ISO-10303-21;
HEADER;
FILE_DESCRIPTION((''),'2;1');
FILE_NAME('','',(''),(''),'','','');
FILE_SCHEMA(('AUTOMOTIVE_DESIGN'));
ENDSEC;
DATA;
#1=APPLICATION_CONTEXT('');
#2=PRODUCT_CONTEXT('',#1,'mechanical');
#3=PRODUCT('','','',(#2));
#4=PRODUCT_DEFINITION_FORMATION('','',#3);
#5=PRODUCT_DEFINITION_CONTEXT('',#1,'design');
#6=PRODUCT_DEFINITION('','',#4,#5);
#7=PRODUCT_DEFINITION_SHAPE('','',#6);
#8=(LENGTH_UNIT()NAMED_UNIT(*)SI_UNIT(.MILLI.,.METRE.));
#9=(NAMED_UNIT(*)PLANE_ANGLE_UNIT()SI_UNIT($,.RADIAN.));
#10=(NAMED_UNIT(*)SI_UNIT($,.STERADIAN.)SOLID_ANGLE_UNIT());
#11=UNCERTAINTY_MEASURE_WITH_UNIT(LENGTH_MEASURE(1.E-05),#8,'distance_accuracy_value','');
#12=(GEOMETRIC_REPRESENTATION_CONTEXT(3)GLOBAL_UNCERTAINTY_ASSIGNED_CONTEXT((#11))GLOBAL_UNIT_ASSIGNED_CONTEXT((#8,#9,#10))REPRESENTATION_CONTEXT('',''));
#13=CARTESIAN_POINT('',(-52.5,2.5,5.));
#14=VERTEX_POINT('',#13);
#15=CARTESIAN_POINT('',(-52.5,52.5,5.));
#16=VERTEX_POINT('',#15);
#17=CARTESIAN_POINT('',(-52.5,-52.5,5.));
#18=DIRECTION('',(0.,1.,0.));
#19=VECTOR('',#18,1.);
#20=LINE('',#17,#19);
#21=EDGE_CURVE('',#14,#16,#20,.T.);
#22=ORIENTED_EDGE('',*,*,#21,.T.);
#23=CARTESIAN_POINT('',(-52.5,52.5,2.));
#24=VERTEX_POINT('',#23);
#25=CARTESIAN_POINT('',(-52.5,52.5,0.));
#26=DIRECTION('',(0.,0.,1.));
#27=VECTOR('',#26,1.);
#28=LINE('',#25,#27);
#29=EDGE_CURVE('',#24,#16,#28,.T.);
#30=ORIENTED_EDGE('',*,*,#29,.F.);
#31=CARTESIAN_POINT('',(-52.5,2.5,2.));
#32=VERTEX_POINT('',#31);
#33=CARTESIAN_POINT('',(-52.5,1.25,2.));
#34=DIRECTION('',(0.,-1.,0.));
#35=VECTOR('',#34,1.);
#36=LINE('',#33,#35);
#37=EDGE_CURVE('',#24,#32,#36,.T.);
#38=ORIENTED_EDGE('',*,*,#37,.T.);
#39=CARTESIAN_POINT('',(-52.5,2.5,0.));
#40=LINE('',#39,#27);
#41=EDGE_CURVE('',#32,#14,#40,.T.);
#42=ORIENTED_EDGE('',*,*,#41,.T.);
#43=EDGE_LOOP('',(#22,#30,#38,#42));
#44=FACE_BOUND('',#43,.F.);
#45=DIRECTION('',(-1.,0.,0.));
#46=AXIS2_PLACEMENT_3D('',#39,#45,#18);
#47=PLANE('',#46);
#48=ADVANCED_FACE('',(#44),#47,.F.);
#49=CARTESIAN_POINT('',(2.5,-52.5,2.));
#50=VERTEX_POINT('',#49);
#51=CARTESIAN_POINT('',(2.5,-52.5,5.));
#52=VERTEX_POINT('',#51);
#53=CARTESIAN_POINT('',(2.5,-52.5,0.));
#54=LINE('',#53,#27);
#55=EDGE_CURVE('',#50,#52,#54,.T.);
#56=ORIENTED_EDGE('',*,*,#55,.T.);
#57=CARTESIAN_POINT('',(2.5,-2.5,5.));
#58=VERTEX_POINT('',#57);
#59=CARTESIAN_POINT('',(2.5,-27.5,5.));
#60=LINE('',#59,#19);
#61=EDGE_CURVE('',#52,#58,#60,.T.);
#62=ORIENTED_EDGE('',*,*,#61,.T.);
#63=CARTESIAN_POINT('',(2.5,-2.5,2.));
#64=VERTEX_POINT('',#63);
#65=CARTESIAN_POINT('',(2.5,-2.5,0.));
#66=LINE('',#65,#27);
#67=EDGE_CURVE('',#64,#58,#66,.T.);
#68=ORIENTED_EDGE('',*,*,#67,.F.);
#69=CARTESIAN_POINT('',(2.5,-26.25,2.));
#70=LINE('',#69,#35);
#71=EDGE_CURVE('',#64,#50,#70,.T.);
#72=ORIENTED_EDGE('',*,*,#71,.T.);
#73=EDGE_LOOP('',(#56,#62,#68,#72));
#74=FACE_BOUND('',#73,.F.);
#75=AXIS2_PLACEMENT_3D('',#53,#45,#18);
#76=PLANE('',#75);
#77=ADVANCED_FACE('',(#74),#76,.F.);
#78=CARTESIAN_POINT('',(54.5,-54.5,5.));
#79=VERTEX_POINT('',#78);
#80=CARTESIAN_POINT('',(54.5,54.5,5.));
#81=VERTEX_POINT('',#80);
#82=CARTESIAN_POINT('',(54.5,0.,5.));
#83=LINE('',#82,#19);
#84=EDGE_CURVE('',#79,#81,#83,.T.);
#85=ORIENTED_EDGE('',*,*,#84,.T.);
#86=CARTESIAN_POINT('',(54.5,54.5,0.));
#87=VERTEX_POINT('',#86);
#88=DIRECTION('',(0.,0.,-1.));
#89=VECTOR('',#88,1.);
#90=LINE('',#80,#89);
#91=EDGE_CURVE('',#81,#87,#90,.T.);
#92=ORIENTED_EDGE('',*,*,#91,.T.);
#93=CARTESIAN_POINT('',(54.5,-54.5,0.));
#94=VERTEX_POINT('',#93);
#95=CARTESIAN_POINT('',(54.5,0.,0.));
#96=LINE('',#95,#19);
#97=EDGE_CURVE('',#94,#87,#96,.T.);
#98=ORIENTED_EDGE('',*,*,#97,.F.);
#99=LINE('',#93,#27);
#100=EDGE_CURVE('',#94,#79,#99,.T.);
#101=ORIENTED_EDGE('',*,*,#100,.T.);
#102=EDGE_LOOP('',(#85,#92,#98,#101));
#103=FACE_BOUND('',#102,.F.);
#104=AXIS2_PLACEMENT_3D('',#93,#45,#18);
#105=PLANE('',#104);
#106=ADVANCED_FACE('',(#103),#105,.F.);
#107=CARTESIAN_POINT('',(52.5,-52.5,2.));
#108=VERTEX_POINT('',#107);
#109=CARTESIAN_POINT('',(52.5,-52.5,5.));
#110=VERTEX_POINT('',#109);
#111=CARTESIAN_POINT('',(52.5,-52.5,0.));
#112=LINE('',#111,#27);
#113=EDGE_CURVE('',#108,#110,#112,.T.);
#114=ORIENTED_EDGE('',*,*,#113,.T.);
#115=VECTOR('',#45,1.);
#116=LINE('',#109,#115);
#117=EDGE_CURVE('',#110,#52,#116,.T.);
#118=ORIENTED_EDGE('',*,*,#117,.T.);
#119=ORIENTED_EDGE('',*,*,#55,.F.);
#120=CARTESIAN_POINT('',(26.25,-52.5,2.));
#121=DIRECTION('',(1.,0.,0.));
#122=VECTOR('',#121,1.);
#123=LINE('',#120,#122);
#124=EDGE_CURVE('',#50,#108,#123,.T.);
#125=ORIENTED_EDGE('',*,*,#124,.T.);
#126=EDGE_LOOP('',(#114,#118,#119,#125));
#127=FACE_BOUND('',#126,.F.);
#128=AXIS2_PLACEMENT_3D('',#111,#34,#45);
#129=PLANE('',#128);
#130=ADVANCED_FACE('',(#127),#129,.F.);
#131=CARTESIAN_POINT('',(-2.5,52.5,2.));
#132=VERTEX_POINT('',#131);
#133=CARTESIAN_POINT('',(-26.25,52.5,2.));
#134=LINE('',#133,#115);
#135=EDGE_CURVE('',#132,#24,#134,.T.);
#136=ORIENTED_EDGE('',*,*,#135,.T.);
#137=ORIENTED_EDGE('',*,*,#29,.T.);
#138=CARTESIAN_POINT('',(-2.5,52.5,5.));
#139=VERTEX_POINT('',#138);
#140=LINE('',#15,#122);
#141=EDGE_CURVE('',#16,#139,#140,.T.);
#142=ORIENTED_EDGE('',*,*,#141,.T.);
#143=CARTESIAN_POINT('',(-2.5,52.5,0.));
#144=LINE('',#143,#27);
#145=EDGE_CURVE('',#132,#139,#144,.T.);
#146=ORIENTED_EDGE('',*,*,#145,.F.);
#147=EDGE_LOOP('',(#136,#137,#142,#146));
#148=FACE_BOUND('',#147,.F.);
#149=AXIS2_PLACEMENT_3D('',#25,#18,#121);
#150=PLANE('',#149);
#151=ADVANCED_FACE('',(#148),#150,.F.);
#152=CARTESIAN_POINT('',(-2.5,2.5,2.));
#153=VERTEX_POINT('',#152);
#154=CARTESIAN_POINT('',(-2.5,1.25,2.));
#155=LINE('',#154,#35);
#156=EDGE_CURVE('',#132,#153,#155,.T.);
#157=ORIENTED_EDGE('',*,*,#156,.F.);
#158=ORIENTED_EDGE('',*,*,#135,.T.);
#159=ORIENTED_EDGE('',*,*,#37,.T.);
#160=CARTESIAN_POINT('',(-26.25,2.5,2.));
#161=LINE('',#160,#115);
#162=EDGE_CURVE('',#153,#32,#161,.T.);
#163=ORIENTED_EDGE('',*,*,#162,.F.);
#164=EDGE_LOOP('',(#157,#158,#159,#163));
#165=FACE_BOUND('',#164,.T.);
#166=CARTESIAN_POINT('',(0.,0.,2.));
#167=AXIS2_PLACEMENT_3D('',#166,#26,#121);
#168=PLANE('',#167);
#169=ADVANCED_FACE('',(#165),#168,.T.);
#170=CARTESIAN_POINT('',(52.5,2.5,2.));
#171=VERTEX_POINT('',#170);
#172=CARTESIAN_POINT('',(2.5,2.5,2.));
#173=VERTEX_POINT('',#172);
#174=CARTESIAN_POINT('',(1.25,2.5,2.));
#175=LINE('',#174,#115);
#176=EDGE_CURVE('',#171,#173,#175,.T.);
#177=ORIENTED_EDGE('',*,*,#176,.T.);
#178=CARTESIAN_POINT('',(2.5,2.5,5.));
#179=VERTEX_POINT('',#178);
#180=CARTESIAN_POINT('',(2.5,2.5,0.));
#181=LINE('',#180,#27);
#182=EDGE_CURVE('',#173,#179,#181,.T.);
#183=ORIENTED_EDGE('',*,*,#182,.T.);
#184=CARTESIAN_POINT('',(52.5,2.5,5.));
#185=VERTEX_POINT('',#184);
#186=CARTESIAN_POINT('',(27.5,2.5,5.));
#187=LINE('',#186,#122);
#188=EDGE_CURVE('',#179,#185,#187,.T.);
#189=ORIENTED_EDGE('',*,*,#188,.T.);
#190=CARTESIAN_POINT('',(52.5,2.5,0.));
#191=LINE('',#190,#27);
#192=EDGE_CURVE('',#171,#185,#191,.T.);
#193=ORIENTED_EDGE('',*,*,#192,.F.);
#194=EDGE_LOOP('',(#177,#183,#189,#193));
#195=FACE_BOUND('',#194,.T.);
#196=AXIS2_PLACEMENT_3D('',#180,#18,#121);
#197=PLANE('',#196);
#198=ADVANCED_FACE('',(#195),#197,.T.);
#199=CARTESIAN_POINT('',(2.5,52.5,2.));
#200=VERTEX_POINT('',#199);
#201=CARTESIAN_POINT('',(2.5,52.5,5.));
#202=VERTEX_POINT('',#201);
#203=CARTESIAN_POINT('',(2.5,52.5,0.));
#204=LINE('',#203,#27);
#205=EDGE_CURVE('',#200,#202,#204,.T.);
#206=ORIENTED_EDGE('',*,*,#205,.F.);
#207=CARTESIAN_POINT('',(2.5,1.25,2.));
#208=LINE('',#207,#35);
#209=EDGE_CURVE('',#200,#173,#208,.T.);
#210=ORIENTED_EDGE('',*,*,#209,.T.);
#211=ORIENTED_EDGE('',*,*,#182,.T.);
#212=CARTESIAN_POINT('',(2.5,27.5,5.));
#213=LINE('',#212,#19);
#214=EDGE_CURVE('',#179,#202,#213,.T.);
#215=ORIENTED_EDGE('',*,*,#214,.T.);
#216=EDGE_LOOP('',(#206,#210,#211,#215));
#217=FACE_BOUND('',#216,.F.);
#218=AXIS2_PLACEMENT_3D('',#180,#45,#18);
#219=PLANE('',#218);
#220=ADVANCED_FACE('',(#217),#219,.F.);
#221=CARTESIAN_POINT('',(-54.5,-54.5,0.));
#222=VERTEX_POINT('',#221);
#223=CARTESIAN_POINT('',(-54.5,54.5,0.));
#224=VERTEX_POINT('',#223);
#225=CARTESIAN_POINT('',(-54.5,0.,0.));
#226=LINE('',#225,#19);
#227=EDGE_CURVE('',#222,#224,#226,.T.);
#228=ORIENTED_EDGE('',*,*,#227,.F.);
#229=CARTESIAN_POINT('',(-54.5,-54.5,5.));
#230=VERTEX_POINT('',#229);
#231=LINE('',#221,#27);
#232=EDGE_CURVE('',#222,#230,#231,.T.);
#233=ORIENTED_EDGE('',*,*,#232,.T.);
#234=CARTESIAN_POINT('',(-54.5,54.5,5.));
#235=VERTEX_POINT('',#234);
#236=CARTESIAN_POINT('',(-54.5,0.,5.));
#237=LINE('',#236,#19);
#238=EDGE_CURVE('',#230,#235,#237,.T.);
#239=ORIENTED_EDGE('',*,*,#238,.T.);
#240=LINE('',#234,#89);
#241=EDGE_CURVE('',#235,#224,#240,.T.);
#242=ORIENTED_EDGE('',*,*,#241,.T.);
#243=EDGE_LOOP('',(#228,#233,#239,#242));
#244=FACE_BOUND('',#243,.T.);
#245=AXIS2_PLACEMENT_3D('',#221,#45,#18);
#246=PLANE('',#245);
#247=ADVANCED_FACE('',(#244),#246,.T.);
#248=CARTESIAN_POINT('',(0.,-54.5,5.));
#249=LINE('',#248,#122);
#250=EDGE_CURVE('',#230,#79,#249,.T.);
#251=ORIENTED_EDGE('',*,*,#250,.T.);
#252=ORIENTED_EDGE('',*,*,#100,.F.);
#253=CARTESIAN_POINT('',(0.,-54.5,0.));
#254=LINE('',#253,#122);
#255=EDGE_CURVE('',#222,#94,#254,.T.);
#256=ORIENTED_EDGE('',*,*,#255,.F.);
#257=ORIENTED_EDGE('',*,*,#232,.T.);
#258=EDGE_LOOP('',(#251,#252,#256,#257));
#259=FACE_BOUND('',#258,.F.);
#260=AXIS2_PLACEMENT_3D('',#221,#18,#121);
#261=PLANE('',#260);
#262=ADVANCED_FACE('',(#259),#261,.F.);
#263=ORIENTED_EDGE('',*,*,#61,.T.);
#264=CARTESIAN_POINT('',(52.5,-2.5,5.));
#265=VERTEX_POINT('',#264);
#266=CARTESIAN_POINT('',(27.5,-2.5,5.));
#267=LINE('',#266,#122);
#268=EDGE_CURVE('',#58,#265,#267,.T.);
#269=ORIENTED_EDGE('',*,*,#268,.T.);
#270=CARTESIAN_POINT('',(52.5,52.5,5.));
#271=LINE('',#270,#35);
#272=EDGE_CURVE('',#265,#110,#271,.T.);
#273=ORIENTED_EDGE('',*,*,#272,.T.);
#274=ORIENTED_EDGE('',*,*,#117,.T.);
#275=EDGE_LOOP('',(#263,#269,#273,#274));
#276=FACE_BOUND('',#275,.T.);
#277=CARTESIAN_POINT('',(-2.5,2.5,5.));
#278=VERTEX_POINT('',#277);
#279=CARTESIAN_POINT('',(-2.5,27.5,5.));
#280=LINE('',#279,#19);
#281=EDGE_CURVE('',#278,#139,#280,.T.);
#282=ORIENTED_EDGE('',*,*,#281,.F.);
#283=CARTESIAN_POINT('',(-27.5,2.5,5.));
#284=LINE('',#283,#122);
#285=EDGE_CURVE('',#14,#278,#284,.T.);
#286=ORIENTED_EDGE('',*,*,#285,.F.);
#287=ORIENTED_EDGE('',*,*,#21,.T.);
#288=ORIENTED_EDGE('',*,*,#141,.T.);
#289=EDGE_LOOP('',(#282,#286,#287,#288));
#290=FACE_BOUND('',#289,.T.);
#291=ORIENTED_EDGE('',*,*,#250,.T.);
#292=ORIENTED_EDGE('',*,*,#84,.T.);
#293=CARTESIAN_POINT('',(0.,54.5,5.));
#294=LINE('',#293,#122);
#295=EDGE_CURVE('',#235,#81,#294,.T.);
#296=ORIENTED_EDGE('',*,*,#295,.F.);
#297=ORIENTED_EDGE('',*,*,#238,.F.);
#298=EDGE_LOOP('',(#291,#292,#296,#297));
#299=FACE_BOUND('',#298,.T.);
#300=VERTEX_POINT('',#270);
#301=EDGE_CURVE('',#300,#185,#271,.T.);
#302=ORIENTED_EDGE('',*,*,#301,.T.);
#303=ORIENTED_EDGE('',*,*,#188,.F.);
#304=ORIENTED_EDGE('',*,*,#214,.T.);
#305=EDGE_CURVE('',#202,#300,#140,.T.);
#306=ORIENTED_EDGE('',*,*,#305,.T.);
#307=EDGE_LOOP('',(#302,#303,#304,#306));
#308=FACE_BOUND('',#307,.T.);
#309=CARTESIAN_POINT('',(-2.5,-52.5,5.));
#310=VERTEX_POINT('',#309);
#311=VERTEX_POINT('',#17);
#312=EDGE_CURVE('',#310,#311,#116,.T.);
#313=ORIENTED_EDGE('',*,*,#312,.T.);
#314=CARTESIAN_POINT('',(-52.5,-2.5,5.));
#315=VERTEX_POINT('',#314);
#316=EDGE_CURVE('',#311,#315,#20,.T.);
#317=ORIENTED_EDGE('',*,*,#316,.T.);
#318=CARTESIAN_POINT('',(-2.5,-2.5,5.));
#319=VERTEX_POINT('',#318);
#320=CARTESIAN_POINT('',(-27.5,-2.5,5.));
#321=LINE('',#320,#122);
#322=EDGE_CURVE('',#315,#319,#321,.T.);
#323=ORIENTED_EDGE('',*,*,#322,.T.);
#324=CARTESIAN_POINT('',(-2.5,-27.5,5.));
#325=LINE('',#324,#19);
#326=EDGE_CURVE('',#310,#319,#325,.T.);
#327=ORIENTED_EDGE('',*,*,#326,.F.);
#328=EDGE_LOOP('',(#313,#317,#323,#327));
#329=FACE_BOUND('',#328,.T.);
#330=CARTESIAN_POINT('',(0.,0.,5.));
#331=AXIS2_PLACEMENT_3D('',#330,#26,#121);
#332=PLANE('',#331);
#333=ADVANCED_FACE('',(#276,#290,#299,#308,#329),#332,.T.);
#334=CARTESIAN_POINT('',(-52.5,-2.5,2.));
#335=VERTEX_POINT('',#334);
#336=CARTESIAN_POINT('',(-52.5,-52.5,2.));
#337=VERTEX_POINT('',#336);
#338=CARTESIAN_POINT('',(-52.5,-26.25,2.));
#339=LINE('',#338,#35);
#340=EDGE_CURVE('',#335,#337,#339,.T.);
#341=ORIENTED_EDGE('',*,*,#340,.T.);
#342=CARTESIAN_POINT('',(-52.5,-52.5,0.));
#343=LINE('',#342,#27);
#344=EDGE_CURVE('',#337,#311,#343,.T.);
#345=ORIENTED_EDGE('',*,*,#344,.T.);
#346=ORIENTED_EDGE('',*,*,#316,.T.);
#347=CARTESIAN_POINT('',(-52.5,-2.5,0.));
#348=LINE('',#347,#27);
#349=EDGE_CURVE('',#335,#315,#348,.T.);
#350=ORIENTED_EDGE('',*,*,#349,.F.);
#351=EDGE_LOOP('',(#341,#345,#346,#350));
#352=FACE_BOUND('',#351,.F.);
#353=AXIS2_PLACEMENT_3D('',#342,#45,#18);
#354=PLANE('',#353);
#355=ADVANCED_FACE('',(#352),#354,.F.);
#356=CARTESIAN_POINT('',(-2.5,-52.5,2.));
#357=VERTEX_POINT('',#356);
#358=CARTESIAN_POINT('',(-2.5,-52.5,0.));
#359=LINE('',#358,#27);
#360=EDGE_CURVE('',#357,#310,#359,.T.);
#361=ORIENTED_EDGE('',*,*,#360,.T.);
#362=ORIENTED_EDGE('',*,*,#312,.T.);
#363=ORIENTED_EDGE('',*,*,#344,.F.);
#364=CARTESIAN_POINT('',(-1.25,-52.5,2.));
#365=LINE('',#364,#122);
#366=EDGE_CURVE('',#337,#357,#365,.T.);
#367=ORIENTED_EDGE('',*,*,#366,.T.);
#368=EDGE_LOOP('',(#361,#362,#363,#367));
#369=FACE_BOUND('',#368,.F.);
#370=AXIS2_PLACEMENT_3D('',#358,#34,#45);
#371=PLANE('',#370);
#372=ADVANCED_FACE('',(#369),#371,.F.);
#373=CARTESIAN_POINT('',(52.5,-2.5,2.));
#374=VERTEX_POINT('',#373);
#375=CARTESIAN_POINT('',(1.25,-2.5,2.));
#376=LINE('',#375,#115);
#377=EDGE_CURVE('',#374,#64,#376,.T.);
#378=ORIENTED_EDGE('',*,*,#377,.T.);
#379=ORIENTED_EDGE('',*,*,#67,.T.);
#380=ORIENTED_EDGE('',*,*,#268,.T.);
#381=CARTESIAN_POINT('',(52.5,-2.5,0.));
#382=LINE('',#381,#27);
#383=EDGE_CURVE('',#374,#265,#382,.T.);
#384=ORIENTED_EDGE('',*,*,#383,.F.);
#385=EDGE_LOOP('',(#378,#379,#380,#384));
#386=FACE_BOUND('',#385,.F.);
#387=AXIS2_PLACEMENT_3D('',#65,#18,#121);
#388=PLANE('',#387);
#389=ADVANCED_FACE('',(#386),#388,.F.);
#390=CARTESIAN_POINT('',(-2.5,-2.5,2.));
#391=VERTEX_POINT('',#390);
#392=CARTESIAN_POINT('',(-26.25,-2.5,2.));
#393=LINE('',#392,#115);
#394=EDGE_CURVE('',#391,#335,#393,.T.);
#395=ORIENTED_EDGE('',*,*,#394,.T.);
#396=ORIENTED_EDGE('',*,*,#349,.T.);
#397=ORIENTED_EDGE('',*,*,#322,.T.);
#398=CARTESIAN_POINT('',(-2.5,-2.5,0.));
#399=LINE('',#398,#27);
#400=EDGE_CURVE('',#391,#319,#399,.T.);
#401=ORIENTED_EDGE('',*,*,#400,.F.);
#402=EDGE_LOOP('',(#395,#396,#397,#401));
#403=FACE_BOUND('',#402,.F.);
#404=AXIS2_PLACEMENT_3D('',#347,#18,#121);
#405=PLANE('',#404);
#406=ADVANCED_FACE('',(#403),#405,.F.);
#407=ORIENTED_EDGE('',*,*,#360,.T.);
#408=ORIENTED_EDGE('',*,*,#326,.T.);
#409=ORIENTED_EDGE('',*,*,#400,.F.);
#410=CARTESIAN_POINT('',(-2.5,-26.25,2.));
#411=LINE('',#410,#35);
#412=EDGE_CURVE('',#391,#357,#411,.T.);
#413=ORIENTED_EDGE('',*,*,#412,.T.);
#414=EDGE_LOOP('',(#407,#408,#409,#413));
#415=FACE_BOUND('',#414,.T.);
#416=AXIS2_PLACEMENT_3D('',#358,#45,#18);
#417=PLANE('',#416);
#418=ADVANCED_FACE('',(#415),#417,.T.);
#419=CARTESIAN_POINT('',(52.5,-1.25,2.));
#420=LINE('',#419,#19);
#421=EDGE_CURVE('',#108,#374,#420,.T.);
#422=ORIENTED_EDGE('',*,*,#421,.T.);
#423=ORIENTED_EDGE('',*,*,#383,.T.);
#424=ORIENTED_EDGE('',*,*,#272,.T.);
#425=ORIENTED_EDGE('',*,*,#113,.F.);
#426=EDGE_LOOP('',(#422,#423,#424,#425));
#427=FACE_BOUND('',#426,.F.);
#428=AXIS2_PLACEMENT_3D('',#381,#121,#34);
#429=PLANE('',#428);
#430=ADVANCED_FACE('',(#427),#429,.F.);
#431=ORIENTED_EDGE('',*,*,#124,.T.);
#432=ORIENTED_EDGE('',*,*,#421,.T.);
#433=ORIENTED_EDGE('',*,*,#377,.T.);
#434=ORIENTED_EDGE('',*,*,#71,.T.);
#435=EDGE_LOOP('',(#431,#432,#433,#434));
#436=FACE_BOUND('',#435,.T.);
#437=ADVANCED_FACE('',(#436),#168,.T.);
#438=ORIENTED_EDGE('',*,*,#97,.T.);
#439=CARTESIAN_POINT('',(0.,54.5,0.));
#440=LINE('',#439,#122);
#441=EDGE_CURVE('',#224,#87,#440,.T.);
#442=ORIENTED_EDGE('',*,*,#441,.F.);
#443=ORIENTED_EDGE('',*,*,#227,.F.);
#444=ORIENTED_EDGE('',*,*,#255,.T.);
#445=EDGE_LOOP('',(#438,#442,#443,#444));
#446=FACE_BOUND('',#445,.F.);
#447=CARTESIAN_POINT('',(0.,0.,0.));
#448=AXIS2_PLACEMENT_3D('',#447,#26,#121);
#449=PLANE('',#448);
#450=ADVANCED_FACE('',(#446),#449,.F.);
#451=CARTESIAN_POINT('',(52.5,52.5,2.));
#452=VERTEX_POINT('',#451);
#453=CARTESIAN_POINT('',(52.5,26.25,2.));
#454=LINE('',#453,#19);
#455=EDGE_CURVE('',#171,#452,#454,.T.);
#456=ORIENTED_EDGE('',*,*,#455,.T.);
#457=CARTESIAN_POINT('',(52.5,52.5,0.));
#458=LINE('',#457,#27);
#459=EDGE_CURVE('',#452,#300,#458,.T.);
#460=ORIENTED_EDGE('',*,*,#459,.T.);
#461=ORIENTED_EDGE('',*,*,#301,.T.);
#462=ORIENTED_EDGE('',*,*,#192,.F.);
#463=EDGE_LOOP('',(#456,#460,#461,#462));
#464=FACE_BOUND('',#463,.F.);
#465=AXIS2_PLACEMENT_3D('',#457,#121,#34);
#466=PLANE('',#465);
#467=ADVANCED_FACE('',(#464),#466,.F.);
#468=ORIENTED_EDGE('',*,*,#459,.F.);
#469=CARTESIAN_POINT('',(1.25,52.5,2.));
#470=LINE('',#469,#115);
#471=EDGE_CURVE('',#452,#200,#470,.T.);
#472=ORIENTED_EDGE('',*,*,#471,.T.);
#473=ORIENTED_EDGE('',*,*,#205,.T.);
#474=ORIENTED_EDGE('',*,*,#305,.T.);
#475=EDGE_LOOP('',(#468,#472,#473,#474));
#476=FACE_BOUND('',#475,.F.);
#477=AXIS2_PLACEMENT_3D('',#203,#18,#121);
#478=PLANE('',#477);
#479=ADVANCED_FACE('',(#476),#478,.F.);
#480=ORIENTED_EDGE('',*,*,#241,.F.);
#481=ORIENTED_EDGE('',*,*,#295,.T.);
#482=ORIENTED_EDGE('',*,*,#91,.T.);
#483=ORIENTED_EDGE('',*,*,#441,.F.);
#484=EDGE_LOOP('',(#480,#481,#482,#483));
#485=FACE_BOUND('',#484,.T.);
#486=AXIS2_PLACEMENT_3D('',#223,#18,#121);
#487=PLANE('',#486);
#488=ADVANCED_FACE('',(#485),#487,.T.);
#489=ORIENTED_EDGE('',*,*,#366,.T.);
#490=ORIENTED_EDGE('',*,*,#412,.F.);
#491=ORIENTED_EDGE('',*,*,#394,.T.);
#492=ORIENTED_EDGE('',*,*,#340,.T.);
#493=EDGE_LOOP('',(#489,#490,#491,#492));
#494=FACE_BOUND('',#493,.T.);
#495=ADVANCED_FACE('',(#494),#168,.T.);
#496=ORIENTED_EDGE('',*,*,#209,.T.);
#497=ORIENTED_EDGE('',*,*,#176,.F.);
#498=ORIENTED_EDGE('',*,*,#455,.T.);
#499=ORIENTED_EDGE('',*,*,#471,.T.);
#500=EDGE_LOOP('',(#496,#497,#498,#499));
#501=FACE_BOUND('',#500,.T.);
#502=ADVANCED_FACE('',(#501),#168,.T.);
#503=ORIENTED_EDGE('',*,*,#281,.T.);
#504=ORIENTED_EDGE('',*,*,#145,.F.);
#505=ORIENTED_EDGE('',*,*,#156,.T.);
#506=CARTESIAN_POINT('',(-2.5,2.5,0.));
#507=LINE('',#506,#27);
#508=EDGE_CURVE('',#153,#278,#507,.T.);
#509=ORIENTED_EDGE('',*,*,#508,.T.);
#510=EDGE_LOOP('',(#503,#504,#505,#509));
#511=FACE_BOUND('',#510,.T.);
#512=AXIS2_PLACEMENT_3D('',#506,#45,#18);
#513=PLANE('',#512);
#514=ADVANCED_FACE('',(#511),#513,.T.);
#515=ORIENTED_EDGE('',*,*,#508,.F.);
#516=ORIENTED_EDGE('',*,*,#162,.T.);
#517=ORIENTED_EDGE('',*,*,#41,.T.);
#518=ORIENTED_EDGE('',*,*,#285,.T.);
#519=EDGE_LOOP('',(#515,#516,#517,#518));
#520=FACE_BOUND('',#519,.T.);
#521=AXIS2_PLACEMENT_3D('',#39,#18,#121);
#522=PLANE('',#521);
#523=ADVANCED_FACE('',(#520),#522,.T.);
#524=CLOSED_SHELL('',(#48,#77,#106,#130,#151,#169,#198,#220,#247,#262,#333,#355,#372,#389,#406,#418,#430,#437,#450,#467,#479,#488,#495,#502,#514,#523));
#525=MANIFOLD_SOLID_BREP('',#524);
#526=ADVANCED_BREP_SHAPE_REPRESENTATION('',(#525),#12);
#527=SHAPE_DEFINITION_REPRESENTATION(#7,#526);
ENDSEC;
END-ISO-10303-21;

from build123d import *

# Parameters (mm, degrees)
F0_W     = 109
F0_H     = 109
F0_W_2   = 5
F0_H_2   = 5
F0_W_3   = 50
F0_H_3   = 50
F1_DEPTH = 2
F2_DEPTH = 5


with BuildPart() as f1:
    # F0 (on Top) → F1 (new body)
    with BuildSketch(Plane.XY):
        Rectangle(F0_W, F0_H)
        Polygon((-2.5, -52.5), (-52.5, -52.5), (-52.5, -2.5), (-52.5, 2.5), (-52.5, 52.5), (-2.5, 52.5), (2.5, 52.5), (52.5, 52.5), (52.5, 2.5), (52.5, -2.5), (52.5, -52.5), (2.5, -52.5), align=None, mode=Mode.SUBTRACT)
        Rectangle(F0_W_2, F0_H_2)
        with Locations((-27.5, 27.5)):
            Rectangle(F0_W_3, F0_H_3)
        with Locations((-27.5, -27.5)):
            Rectangle(F0_W_3, F0_H_3)
        with Locations((27.5, -27.5)):
            Rectangle(F0_W_3, F0_H_3)
        with Locations((27.5, 27.5)):
            Rectangle(F0_W_3, F0_H_3)
        with Locations((0, 27.5)):
            Rectangle(F0_W_2, F0_H_3)
        with Locations((27.5, 0)):
            Rectangle(F0_W_3, F0_H_2)
        with Locations((0, -27.5)):
            Rectangle(F0_W_2, F0_H_3)
        with Locations((-27.5, 0)):
            Rectangle(F0_W_3, F0_H_2)
    extrude(amount=F1_DEPTH)

    # F0 (on Top) → F2 (join)
    with BuildSketch(Plane.XY):
        Rectangle(F0_W, F0_H)
        Polygon((-2.5, -52.5), (-52.5, -52.5), (-52.5, -2.5), (-52.5, 2.5), (-52.5, 52.5), (-2.5, 52.5), (2.5, 52.5), (52.5, 52.5), (52.5, 2.5), (52.5, -2.5), (52.5, -52.5), (2.5, -52.5), align=None, mode=Mode.SUBTRACT)
        with Locations((0, -27.5)):
            Rectangle(F0_W_2, F0_H_3)
        with Locations((27.5, 0)):
            Rectangle(F0_W_3, F0_H_2)
        with Locations((-27.5, 0)):
            Rectangle(F0_W_3, F0_H_2)
        with Locations((0, 27.5)):
            Rectangle(F0_W_2, F0_H_3)
        Rectangle(F0_W_2, F0_H_2)
    extrude(amount=F2_DEPTH)


solid = f1.part
